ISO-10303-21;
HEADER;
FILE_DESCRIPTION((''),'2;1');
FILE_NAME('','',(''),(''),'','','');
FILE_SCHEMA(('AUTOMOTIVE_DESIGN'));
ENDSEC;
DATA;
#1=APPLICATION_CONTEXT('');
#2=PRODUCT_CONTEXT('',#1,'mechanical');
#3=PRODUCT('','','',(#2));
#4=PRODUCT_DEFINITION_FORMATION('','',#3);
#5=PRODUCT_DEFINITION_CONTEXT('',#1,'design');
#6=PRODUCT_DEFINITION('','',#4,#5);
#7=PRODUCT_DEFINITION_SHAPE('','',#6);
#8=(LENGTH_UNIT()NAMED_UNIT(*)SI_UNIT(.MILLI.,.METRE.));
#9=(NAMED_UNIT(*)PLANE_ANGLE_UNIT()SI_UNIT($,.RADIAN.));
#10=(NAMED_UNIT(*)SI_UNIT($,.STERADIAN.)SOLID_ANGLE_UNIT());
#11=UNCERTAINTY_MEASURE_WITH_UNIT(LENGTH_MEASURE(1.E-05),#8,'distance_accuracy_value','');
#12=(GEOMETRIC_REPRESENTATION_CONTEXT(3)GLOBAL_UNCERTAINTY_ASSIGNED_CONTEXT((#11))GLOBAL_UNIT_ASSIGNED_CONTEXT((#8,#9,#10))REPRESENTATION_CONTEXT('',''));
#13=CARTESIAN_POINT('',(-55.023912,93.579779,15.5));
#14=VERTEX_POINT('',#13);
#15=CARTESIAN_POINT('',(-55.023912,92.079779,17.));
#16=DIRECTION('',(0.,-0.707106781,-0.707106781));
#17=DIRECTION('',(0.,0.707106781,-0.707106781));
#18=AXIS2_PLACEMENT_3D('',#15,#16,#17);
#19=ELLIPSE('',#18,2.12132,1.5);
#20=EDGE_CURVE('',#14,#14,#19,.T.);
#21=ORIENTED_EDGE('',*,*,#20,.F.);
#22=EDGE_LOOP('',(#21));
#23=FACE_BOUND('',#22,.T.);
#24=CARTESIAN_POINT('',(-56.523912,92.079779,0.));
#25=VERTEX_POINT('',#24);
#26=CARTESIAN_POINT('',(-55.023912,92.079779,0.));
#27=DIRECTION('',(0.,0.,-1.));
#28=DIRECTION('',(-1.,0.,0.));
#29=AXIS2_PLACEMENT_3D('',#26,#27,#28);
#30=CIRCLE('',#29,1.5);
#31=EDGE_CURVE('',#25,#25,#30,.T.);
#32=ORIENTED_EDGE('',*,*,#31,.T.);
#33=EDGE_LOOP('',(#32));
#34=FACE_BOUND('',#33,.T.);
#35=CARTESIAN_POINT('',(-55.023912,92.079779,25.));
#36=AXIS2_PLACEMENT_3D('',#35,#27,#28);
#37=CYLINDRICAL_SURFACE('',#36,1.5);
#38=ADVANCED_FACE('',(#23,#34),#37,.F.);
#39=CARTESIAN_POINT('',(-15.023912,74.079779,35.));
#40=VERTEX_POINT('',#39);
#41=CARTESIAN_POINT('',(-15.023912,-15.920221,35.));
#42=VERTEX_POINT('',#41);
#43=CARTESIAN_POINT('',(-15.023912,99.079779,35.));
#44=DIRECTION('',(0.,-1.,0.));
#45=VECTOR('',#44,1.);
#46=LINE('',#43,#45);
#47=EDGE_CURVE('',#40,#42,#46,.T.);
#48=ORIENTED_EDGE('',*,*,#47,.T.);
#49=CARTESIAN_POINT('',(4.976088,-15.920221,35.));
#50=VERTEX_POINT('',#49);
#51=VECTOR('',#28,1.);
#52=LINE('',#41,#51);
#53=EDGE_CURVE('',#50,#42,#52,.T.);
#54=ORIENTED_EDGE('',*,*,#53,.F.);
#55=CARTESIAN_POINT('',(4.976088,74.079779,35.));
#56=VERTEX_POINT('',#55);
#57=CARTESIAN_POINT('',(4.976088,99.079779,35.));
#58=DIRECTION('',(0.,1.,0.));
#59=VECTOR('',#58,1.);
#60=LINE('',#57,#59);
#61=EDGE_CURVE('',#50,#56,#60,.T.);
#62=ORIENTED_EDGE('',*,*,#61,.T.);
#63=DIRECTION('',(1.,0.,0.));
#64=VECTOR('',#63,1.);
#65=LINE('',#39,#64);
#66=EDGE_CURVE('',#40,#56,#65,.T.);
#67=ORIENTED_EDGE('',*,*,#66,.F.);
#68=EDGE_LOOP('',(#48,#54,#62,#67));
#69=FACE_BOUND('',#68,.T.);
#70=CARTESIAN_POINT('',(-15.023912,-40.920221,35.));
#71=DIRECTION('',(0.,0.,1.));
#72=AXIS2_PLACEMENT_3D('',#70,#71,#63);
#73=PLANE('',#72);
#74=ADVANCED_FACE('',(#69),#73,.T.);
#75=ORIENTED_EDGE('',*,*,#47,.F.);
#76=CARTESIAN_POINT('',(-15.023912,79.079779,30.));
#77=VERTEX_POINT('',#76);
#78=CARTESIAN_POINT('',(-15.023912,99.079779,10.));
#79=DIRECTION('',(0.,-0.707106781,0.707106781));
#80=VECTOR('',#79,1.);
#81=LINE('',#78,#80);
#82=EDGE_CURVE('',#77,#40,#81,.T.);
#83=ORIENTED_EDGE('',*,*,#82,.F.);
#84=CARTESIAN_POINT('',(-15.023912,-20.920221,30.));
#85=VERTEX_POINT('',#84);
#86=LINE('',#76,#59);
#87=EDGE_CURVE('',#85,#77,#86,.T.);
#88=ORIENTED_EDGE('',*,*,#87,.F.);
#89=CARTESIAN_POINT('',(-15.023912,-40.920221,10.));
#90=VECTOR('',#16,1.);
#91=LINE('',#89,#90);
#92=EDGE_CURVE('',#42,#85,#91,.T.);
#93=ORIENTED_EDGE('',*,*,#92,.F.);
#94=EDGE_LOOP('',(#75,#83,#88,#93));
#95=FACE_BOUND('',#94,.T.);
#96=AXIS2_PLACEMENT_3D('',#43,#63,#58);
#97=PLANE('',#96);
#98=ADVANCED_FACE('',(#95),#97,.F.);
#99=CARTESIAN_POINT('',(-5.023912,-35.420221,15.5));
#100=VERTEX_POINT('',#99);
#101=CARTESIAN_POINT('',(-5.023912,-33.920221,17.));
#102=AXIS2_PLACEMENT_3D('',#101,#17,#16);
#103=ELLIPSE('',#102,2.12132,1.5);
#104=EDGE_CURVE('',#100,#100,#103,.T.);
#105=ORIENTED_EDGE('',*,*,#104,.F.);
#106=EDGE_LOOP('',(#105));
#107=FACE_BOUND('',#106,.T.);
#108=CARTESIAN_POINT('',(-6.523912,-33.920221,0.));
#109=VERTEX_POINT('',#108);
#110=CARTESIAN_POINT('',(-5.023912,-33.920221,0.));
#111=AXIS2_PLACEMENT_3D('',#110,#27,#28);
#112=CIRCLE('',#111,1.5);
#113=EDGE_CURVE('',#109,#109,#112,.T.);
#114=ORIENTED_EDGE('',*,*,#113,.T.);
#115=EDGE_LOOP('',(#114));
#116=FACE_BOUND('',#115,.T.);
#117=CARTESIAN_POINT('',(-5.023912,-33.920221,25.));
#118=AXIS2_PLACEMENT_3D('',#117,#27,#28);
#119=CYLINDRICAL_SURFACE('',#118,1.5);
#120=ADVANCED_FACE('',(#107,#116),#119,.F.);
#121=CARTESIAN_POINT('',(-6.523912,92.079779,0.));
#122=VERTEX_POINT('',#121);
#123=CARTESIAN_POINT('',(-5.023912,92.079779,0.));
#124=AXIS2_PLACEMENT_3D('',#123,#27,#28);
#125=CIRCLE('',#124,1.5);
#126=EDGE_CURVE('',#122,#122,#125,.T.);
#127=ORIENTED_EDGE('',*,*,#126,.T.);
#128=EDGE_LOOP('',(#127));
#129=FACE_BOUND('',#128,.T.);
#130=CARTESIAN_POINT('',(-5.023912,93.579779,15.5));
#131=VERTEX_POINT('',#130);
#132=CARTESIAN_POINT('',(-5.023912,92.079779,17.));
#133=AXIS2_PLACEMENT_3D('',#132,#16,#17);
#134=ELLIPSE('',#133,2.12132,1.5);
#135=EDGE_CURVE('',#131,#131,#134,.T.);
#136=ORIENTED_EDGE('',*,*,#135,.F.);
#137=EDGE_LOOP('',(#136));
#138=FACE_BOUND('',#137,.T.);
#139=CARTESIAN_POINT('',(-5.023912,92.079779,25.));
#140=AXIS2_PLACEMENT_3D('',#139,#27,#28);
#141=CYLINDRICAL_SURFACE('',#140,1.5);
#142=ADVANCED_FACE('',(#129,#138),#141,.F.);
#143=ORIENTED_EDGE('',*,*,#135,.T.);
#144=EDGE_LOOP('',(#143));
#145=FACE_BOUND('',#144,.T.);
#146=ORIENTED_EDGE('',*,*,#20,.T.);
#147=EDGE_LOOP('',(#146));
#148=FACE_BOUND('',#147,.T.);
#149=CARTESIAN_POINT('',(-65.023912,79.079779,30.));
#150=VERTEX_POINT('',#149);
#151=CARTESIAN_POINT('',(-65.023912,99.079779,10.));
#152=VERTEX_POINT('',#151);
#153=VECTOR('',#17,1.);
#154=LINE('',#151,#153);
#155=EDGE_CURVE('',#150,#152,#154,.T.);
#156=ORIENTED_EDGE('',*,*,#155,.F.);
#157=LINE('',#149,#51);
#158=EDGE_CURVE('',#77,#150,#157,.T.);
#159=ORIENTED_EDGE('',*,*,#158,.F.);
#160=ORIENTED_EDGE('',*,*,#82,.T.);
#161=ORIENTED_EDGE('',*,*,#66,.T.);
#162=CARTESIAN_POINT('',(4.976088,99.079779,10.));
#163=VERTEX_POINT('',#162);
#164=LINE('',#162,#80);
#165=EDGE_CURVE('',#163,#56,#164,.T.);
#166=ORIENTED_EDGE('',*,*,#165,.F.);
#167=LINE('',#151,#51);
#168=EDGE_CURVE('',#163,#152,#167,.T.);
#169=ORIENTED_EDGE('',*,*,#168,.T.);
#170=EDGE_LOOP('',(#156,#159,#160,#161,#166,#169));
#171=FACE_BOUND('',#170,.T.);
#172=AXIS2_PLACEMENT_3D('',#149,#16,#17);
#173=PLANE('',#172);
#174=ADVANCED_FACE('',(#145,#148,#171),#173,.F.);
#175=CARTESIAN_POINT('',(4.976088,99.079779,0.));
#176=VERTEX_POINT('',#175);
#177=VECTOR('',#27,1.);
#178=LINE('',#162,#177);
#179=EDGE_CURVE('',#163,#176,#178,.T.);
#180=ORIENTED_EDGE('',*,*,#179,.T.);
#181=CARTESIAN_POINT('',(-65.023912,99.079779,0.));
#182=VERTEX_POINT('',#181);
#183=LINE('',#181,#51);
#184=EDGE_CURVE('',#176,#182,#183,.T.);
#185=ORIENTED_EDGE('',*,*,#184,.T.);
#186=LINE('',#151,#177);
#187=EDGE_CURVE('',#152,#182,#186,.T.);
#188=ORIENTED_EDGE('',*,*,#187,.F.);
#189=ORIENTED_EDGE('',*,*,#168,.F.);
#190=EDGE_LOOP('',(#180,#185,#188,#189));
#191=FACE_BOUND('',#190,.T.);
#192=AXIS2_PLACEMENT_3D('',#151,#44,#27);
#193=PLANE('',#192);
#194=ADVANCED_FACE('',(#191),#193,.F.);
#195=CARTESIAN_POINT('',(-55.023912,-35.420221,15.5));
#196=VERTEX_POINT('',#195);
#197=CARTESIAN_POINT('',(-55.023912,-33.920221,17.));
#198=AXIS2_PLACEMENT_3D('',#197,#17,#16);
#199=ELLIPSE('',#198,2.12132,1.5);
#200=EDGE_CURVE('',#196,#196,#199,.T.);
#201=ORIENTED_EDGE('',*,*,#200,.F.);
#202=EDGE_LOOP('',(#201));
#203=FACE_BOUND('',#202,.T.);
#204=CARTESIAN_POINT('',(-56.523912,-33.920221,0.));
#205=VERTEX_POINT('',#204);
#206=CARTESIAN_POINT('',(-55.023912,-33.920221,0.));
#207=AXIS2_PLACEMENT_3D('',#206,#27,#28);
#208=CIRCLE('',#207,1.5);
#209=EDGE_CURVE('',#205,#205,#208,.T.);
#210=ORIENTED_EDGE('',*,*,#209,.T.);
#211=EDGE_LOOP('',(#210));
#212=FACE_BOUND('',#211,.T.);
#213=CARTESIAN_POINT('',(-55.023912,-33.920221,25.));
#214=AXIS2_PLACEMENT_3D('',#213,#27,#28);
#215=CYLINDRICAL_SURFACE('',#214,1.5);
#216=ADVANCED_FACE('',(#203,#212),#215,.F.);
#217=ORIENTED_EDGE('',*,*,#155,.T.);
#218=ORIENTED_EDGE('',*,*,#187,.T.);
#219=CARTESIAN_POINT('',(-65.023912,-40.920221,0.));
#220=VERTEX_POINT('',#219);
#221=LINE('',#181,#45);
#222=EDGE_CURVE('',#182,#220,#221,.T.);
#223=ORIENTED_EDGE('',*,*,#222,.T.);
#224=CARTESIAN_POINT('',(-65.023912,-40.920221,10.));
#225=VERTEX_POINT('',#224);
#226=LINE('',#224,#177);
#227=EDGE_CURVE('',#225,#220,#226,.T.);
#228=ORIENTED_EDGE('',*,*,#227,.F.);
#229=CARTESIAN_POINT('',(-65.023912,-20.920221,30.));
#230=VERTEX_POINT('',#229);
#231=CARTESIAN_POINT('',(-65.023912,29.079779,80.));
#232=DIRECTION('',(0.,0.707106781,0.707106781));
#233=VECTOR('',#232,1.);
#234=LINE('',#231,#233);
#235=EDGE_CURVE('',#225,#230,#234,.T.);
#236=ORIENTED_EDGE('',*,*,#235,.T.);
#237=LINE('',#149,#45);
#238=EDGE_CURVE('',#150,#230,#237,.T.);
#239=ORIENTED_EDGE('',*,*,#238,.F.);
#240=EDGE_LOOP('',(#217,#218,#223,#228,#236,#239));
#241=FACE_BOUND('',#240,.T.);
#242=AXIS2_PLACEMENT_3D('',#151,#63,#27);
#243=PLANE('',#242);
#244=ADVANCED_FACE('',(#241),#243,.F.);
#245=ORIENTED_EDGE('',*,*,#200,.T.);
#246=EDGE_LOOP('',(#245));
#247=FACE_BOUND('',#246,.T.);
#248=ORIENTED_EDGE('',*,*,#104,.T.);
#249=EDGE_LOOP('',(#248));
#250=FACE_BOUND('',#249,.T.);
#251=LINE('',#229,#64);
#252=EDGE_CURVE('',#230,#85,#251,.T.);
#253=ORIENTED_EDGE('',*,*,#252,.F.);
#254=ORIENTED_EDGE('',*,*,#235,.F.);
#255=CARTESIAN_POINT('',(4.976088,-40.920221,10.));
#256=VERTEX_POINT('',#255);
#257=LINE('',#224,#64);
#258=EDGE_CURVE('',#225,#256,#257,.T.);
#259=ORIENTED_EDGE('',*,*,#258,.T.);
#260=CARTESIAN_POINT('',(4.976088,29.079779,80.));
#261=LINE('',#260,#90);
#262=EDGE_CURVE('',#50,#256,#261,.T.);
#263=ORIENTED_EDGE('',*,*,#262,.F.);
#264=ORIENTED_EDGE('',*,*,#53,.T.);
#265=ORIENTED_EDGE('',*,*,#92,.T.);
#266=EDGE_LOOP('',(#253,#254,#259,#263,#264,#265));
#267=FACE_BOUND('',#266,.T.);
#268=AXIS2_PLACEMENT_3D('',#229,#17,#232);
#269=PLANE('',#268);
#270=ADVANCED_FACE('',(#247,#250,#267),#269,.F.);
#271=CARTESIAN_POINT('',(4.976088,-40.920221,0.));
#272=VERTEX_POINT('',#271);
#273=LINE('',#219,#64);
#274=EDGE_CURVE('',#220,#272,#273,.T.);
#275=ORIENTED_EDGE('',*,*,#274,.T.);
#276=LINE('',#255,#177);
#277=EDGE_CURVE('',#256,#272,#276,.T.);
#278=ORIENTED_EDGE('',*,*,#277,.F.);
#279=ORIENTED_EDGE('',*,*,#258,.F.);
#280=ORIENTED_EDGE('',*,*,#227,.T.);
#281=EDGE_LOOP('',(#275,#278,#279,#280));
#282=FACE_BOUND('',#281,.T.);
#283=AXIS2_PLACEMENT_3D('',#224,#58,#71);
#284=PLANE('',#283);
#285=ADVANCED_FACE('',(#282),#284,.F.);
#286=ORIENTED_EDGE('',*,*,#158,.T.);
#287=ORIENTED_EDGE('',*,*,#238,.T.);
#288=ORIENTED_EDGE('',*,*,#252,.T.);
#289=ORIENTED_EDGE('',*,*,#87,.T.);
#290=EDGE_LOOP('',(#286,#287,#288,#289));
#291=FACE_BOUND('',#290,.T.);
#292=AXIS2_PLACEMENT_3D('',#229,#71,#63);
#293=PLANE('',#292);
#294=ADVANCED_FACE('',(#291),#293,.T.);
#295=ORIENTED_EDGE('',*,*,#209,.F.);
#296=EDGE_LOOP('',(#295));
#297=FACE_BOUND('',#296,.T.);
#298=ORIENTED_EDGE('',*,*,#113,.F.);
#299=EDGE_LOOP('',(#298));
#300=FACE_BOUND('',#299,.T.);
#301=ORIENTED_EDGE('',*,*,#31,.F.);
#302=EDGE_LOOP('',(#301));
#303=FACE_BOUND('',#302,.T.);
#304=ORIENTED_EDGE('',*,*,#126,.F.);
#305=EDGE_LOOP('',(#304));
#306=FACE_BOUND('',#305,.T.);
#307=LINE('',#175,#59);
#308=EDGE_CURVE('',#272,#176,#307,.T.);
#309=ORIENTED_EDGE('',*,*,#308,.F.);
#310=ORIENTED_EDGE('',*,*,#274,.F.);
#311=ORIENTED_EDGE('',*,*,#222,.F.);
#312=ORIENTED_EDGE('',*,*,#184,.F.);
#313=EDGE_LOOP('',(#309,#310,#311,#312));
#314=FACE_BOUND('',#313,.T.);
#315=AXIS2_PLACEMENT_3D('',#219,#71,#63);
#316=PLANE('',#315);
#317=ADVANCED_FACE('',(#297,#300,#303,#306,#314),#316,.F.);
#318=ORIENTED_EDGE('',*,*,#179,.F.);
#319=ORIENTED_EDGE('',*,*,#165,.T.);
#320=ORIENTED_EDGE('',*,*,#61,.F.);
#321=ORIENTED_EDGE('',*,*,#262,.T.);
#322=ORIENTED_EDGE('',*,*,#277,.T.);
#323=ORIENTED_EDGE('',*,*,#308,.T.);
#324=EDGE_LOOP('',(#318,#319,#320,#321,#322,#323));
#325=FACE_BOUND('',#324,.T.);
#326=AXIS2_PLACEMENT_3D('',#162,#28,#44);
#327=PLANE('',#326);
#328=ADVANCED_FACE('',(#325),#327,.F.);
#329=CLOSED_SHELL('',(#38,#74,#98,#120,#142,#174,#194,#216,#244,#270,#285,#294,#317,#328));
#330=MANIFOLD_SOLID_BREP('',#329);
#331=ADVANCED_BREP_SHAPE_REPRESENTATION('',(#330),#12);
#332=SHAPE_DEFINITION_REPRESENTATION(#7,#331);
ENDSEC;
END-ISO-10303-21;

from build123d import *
from build123d.topology import SkipClean

# Parameters (mm, degrees)
SKETCH_1_W          = 70
SKETCH_1_H          = 140
EXTRUDE_1_DEPTH     = 10
SKETCH_2_W          = 50
SKETCH_2_H          = 100
EXTRUDE_2_DEPTH     = 20
CHAMFER_2_SIZE      = 20
CHAMFER_3_SIZE      = 20
SKETCH_3_W          = 20
SKETCH_3_H          = 140
EXTRUDE_3_DEPTH     = 25
CUT_EXTRUDE_1_DEPTH = 25
SKETCH_5_R          = 1.5
CUT_EXTRUDE_2_DEPTH = 25


with BuildPart() as part:
    # 草图1 → 凸台-拉伸1 (new body)
    with BuildSketch(Plane.XY):
        with Locations((-30.02391207, 29.079779473)):
            Rectangle(SKETCH_1_W, SKETCH_1_H)
    extrude(amount=EXTRUDE_1_DEPTH)

    # 草图2 → 凸台-拉伸2 (add)
    with BuildSketch(Plane.XY.offset(10)):
        with Locations((-40.02391207, 29.079779473)):
            Rectangle(SKETCH_2_W, SKETCH_2_H)
    extrude(amount=EXTRUDE_2_DEPTH)

    # 倒角2
    chamfer_2_edges = [part.edges().sort_by_distance(p)[0] for p in [
        (-40.02391207, -20.920220527, 10),
    ]]
    chamfer(chamfer_2_edges, length=CHAMFER_2_SIZE - 0.0001)  # a hair under: the kernel refuses the full size

    # 倒角3
    chamfer_3_edges = [part.edges().sort_by_distance(p)[0] for p in [
        (-40.02391207, 79.079779473, 10),
    ]]
    chamfer(chamfer_3_edges, length=CHAMFER_3_SIZE - 0.0001)  # a hair under: the kernel refuses the full size

    # 草图3 → 凸台-拉伸3 (add)
    with BuildSketch(Plane.XY.offset(10)):
        with Locations((-5.02391207, 29.079779473)):
            Rectangle(SKETCH_3_W, SKETCH_3_H)
    extrude(amount=EXTRUDE_3_DEPTH)

    # 草图4 → 切除-拉伸1 (cut)
    with SkipClean():  # the faces are left unmerged after this step: merging them gives an invalid solid
        with BuildSketch(Plane.ZY.offset(15.02391207)):
            Polygon((10, -40.920220527), (42.065793191, -8.854427336), (42.065793191, -55.280550519), align=None)
            Polygon((10, 99.079779473), (42.065793191, 67.013986282), (50.963251555, 103.923082266), align=None)
        extrude(amount=-CUT_EXTRUDE_1_DEPTH, mode=Mode.SUBTRACT)

    # 草图5 → 切除-拉伸2 (cut)
    with SkipClean():  # the faces are left unmerged after this step: merging them gives an invalid solid
        with BuildSketch(Plane(origin=(0, 0, 0), x_dir=(-1, 0, 0), z_dir=(0, 0, -1))):
            with Locations((5.02391207, 92.079779473)):
                Circle(SKETCH_5_R)
            with Locations((55.02391207, 92.079779473)):
                Circle(SKETCH_5_R)
            with Locations((5.02391207, -33.920220527)):
                Circle(SKETCH_5_R)
            with Locations((55.02391207, -33.920220527)):
                Circle(SKETCH_5_R)
        extrude(amount=-CUT_EXTRUDE_2_DEPTH, mode=Mode.SUBTRACT)


solid = part.part
